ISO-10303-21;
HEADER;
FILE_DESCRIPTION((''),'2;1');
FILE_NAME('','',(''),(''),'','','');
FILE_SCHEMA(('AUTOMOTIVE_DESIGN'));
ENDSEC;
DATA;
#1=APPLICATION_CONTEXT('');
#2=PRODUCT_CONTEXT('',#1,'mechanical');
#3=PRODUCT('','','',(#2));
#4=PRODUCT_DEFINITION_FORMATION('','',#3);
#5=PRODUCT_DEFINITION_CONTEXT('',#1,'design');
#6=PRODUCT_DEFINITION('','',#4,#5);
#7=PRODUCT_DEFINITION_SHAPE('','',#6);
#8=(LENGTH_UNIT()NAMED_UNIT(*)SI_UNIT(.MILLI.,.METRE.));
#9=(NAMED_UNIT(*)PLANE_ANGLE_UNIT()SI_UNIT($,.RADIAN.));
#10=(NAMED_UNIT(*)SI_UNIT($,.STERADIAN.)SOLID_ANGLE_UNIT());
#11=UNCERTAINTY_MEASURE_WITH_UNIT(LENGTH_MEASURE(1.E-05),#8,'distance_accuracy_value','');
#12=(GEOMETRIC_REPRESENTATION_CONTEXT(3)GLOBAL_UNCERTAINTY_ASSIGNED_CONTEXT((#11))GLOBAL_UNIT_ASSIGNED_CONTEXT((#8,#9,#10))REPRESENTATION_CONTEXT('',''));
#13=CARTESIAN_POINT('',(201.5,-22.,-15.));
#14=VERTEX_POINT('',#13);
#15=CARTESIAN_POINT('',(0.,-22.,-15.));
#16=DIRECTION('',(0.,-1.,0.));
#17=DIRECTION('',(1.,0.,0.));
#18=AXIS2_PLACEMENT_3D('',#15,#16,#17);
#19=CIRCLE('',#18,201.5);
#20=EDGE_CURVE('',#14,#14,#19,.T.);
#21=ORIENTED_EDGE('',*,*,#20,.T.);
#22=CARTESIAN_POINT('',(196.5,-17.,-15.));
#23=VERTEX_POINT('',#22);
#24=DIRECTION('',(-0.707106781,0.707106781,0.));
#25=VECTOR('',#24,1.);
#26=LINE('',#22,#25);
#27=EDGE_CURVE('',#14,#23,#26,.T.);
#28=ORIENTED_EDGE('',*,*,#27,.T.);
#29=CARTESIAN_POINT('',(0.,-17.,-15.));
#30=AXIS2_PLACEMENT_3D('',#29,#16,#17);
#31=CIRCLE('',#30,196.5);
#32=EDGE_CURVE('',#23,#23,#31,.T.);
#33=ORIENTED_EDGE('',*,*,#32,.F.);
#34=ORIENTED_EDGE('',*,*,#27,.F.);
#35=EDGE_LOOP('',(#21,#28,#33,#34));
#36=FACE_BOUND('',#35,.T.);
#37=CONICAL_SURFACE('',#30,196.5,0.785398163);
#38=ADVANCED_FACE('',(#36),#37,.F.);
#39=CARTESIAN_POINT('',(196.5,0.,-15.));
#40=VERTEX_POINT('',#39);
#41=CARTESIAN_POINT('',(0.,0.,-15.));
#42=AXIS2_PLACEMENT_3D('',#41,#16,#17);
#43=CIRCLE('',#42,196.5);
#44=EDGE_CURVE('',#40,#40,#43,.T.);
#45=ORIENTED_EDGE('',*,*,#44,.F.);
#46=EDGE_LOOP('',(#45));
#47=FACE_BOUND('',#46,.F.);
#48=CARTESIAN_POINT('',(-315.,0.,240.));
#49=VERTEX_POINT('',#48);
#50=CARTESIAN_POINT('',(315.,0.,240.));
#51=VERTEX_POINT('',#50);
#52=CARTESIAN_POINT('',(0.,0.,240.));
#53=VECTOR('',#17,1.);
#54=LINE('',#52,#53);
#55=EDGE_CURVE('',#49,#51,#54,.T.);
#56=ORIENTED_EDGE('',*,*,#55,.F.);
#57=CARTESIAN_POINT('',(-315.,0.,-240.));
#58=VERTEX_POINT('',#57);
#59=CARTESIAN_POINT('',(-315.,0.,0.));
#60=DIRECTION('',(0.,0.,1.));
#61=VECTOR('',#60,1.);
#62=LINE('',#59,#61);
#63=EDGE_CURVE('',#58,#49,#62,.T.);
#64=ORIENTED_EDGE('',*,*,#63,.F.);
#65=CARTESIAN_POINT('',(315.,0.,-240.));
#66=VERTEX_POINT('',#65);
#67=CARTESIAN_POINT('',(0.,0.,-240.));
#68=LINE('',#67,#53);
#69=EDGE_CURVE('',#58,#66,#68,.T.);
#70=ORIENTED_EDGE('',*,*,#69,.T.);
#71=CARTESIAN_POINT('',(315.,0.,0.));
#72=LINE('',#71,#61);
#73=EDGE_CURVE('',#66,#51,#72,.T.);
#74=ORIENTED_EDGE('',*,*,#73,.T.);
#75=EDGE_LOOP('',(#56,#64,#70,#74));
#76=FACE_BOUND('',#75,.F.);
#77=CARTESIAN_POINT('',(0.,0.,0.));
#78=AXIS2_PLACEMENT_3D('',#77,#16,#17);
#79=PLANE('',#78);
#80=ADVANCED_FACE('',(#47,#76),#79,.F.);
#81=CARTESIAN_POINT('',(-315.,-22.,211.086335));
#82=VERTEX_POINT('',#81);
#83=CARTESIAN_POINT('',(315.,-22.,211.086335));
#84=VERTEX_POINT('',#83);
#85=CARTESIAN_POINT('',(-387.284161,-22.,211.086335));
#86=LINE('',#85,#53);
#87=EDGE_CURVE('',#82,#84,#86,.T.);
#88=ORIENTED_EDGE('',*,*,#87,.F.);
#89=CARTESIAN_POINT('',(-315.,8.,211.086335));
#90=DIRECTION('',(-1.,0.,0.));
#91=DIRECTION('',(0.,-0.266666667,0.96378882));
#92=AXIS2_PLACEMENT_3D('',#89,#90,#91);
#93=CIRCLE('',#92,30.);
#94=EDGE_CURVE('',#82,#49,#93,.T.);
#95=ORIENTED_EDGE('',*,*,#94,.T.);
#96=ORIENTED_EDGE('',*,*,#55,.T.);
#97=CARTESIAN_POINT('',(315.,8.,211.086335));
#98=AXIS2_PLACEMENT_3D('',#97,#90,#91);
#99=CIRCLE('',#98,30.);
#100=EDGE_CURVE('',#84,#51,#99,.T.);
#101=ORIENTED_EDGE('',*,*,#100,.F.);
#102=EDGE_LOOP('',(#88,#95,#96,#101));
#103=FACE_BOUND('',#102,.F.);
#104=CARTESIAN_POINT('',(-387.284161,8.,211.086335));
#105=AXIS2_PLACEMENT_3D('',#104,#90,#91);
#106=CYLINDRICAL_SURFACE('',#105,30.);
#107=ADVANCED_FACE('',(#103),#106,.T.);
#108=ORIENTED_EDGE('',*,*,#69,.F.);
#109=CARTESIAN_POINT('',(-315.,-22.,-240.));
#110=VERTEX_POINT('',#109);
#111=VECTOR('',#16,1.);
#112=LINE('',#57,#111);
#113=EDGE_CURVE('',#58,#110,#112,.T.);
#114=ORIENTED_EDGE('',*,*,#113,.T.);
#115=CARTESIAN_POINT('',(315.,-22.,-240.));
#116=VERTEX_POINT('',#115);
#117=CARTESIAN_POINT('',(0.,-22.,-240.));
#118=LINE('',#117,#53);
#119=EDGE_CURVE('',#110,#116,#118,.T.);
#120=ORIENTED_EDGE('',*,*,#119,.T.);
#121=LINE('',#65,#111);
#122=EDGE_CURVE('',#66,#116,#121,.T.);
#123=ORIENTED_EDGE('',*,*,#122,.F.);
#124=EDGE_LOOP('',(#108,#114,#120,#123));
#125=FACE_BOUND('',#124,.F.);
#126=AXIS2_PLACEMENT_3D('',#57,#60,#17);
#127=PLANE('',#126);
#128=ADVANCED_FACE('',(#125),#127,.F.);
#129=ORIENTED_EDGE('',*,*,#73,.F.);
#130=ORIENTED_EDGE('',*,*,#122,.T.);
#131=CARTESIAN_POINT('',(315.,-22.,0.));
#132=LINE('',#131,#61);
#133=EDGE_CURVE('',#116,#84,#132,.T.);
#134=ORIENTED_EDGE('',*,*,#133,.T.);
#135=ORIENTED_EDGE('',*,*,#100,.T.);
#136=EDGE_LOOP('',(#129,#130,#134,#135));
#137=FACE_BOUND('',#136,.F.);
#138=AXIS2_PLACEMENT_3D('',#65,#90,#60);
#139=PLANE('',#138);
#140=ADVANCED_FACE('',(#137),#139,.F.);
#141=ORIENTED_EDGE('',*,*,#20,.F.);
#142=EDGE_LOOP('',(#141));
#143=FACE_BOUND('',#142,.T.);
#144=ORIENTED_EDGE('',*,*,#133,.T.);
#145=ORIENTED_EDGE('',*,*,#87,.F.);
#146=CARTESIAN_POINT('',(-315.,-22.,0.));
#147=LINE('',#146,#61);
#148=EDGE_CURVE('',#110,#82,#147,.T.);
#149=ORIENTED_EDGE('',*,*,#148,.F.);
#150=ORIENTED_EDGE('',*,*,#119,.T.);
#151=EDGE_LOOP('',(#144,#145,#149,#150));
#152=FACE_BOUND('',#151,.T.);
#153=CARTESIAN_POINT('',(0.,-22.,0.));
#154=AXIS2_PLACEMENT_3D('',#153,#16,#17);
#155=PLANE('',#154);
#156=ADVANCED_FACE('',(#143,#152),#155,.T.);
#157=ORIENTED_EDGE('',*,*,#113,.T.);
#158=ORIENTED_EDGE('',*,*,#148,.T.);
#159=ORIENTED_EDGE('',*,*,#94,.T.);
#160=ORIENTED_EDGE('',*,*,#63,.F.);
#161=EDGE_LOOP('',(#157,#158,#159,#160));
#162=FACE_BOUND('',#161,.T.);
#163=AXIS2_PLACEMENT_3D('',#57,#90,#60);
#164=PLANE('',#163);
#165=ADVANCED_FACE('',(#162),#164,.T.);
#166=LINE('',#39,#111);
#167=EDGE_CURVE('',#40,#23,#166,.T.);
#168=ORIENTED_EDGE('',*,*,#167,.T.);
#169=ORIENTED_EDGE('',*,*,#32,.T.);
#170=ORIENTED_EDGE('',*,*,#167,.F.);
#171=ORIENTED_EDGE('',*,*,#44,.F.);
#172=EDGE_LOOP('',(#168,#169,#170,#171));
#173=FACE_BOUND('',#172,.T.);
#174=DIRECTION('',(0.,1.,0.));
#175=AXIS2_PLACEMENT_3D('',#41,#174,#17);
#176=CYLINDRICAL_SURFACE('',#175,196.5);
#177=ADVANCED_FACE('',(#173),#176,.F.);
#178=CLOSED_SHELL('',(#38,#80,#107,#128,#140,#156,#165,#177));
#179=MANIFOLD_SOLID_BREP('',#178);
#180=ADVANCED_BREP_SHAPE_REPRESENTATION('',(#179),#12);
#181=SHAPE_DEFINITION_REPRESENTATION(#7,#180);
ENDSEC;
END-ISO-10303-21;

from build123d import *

# Parameters (mm, degrees)
F0_W        = 630
F0_H        = 480
F0_R        = 196.5
F1_DEPTH    = 22
F2_T1_DEPTH = 774.568322948
F3_SIZE     = 5


# Not quite as in the source:
# - a fillet or chamfer that OpenCascade refuses, or shapes differently, is made with other operations: its cross-section is extruded or revolved along the edge and cut away or added


with BuildPart() as f1:
    # F0 (on Front) → F1 (new body)
    with BuildSketch(Plane.XZ):
        Rectangle(F0_W, F0_H)
        with Locations((0, -15)):
            Circle(F0_R, mode=Mode.SUBTRACT)
    extrude(amount=F1_DEPTH)

    # F2: fillet of radius 30 on 1 edges, made by hand

    # F2_s2 → F2_t1 (cut)
    with BuildSketch(Plane.YZ.offset(-387.284161474)):
        with BuildLine():
            ThreePointArc((0, 240), (-15.8746727726, 229.252237535), (-22, 211.0863354104))
            Line((-22, 211.0863354104), (-22, 240))
            Line((-22, 240), (0, 240))
        make_face()
    extrude(amount=F2_T1_DEPTH, mode=Mode.SUBTRACT)

    # F3
    f3_edges = [f1.edges().sort_by_distance(p)[0] for p in [
        (-196.5, -22, -15),
    ]]
    chamfer(f3_edges, length=F3_SIZE)


solid = f1.part
